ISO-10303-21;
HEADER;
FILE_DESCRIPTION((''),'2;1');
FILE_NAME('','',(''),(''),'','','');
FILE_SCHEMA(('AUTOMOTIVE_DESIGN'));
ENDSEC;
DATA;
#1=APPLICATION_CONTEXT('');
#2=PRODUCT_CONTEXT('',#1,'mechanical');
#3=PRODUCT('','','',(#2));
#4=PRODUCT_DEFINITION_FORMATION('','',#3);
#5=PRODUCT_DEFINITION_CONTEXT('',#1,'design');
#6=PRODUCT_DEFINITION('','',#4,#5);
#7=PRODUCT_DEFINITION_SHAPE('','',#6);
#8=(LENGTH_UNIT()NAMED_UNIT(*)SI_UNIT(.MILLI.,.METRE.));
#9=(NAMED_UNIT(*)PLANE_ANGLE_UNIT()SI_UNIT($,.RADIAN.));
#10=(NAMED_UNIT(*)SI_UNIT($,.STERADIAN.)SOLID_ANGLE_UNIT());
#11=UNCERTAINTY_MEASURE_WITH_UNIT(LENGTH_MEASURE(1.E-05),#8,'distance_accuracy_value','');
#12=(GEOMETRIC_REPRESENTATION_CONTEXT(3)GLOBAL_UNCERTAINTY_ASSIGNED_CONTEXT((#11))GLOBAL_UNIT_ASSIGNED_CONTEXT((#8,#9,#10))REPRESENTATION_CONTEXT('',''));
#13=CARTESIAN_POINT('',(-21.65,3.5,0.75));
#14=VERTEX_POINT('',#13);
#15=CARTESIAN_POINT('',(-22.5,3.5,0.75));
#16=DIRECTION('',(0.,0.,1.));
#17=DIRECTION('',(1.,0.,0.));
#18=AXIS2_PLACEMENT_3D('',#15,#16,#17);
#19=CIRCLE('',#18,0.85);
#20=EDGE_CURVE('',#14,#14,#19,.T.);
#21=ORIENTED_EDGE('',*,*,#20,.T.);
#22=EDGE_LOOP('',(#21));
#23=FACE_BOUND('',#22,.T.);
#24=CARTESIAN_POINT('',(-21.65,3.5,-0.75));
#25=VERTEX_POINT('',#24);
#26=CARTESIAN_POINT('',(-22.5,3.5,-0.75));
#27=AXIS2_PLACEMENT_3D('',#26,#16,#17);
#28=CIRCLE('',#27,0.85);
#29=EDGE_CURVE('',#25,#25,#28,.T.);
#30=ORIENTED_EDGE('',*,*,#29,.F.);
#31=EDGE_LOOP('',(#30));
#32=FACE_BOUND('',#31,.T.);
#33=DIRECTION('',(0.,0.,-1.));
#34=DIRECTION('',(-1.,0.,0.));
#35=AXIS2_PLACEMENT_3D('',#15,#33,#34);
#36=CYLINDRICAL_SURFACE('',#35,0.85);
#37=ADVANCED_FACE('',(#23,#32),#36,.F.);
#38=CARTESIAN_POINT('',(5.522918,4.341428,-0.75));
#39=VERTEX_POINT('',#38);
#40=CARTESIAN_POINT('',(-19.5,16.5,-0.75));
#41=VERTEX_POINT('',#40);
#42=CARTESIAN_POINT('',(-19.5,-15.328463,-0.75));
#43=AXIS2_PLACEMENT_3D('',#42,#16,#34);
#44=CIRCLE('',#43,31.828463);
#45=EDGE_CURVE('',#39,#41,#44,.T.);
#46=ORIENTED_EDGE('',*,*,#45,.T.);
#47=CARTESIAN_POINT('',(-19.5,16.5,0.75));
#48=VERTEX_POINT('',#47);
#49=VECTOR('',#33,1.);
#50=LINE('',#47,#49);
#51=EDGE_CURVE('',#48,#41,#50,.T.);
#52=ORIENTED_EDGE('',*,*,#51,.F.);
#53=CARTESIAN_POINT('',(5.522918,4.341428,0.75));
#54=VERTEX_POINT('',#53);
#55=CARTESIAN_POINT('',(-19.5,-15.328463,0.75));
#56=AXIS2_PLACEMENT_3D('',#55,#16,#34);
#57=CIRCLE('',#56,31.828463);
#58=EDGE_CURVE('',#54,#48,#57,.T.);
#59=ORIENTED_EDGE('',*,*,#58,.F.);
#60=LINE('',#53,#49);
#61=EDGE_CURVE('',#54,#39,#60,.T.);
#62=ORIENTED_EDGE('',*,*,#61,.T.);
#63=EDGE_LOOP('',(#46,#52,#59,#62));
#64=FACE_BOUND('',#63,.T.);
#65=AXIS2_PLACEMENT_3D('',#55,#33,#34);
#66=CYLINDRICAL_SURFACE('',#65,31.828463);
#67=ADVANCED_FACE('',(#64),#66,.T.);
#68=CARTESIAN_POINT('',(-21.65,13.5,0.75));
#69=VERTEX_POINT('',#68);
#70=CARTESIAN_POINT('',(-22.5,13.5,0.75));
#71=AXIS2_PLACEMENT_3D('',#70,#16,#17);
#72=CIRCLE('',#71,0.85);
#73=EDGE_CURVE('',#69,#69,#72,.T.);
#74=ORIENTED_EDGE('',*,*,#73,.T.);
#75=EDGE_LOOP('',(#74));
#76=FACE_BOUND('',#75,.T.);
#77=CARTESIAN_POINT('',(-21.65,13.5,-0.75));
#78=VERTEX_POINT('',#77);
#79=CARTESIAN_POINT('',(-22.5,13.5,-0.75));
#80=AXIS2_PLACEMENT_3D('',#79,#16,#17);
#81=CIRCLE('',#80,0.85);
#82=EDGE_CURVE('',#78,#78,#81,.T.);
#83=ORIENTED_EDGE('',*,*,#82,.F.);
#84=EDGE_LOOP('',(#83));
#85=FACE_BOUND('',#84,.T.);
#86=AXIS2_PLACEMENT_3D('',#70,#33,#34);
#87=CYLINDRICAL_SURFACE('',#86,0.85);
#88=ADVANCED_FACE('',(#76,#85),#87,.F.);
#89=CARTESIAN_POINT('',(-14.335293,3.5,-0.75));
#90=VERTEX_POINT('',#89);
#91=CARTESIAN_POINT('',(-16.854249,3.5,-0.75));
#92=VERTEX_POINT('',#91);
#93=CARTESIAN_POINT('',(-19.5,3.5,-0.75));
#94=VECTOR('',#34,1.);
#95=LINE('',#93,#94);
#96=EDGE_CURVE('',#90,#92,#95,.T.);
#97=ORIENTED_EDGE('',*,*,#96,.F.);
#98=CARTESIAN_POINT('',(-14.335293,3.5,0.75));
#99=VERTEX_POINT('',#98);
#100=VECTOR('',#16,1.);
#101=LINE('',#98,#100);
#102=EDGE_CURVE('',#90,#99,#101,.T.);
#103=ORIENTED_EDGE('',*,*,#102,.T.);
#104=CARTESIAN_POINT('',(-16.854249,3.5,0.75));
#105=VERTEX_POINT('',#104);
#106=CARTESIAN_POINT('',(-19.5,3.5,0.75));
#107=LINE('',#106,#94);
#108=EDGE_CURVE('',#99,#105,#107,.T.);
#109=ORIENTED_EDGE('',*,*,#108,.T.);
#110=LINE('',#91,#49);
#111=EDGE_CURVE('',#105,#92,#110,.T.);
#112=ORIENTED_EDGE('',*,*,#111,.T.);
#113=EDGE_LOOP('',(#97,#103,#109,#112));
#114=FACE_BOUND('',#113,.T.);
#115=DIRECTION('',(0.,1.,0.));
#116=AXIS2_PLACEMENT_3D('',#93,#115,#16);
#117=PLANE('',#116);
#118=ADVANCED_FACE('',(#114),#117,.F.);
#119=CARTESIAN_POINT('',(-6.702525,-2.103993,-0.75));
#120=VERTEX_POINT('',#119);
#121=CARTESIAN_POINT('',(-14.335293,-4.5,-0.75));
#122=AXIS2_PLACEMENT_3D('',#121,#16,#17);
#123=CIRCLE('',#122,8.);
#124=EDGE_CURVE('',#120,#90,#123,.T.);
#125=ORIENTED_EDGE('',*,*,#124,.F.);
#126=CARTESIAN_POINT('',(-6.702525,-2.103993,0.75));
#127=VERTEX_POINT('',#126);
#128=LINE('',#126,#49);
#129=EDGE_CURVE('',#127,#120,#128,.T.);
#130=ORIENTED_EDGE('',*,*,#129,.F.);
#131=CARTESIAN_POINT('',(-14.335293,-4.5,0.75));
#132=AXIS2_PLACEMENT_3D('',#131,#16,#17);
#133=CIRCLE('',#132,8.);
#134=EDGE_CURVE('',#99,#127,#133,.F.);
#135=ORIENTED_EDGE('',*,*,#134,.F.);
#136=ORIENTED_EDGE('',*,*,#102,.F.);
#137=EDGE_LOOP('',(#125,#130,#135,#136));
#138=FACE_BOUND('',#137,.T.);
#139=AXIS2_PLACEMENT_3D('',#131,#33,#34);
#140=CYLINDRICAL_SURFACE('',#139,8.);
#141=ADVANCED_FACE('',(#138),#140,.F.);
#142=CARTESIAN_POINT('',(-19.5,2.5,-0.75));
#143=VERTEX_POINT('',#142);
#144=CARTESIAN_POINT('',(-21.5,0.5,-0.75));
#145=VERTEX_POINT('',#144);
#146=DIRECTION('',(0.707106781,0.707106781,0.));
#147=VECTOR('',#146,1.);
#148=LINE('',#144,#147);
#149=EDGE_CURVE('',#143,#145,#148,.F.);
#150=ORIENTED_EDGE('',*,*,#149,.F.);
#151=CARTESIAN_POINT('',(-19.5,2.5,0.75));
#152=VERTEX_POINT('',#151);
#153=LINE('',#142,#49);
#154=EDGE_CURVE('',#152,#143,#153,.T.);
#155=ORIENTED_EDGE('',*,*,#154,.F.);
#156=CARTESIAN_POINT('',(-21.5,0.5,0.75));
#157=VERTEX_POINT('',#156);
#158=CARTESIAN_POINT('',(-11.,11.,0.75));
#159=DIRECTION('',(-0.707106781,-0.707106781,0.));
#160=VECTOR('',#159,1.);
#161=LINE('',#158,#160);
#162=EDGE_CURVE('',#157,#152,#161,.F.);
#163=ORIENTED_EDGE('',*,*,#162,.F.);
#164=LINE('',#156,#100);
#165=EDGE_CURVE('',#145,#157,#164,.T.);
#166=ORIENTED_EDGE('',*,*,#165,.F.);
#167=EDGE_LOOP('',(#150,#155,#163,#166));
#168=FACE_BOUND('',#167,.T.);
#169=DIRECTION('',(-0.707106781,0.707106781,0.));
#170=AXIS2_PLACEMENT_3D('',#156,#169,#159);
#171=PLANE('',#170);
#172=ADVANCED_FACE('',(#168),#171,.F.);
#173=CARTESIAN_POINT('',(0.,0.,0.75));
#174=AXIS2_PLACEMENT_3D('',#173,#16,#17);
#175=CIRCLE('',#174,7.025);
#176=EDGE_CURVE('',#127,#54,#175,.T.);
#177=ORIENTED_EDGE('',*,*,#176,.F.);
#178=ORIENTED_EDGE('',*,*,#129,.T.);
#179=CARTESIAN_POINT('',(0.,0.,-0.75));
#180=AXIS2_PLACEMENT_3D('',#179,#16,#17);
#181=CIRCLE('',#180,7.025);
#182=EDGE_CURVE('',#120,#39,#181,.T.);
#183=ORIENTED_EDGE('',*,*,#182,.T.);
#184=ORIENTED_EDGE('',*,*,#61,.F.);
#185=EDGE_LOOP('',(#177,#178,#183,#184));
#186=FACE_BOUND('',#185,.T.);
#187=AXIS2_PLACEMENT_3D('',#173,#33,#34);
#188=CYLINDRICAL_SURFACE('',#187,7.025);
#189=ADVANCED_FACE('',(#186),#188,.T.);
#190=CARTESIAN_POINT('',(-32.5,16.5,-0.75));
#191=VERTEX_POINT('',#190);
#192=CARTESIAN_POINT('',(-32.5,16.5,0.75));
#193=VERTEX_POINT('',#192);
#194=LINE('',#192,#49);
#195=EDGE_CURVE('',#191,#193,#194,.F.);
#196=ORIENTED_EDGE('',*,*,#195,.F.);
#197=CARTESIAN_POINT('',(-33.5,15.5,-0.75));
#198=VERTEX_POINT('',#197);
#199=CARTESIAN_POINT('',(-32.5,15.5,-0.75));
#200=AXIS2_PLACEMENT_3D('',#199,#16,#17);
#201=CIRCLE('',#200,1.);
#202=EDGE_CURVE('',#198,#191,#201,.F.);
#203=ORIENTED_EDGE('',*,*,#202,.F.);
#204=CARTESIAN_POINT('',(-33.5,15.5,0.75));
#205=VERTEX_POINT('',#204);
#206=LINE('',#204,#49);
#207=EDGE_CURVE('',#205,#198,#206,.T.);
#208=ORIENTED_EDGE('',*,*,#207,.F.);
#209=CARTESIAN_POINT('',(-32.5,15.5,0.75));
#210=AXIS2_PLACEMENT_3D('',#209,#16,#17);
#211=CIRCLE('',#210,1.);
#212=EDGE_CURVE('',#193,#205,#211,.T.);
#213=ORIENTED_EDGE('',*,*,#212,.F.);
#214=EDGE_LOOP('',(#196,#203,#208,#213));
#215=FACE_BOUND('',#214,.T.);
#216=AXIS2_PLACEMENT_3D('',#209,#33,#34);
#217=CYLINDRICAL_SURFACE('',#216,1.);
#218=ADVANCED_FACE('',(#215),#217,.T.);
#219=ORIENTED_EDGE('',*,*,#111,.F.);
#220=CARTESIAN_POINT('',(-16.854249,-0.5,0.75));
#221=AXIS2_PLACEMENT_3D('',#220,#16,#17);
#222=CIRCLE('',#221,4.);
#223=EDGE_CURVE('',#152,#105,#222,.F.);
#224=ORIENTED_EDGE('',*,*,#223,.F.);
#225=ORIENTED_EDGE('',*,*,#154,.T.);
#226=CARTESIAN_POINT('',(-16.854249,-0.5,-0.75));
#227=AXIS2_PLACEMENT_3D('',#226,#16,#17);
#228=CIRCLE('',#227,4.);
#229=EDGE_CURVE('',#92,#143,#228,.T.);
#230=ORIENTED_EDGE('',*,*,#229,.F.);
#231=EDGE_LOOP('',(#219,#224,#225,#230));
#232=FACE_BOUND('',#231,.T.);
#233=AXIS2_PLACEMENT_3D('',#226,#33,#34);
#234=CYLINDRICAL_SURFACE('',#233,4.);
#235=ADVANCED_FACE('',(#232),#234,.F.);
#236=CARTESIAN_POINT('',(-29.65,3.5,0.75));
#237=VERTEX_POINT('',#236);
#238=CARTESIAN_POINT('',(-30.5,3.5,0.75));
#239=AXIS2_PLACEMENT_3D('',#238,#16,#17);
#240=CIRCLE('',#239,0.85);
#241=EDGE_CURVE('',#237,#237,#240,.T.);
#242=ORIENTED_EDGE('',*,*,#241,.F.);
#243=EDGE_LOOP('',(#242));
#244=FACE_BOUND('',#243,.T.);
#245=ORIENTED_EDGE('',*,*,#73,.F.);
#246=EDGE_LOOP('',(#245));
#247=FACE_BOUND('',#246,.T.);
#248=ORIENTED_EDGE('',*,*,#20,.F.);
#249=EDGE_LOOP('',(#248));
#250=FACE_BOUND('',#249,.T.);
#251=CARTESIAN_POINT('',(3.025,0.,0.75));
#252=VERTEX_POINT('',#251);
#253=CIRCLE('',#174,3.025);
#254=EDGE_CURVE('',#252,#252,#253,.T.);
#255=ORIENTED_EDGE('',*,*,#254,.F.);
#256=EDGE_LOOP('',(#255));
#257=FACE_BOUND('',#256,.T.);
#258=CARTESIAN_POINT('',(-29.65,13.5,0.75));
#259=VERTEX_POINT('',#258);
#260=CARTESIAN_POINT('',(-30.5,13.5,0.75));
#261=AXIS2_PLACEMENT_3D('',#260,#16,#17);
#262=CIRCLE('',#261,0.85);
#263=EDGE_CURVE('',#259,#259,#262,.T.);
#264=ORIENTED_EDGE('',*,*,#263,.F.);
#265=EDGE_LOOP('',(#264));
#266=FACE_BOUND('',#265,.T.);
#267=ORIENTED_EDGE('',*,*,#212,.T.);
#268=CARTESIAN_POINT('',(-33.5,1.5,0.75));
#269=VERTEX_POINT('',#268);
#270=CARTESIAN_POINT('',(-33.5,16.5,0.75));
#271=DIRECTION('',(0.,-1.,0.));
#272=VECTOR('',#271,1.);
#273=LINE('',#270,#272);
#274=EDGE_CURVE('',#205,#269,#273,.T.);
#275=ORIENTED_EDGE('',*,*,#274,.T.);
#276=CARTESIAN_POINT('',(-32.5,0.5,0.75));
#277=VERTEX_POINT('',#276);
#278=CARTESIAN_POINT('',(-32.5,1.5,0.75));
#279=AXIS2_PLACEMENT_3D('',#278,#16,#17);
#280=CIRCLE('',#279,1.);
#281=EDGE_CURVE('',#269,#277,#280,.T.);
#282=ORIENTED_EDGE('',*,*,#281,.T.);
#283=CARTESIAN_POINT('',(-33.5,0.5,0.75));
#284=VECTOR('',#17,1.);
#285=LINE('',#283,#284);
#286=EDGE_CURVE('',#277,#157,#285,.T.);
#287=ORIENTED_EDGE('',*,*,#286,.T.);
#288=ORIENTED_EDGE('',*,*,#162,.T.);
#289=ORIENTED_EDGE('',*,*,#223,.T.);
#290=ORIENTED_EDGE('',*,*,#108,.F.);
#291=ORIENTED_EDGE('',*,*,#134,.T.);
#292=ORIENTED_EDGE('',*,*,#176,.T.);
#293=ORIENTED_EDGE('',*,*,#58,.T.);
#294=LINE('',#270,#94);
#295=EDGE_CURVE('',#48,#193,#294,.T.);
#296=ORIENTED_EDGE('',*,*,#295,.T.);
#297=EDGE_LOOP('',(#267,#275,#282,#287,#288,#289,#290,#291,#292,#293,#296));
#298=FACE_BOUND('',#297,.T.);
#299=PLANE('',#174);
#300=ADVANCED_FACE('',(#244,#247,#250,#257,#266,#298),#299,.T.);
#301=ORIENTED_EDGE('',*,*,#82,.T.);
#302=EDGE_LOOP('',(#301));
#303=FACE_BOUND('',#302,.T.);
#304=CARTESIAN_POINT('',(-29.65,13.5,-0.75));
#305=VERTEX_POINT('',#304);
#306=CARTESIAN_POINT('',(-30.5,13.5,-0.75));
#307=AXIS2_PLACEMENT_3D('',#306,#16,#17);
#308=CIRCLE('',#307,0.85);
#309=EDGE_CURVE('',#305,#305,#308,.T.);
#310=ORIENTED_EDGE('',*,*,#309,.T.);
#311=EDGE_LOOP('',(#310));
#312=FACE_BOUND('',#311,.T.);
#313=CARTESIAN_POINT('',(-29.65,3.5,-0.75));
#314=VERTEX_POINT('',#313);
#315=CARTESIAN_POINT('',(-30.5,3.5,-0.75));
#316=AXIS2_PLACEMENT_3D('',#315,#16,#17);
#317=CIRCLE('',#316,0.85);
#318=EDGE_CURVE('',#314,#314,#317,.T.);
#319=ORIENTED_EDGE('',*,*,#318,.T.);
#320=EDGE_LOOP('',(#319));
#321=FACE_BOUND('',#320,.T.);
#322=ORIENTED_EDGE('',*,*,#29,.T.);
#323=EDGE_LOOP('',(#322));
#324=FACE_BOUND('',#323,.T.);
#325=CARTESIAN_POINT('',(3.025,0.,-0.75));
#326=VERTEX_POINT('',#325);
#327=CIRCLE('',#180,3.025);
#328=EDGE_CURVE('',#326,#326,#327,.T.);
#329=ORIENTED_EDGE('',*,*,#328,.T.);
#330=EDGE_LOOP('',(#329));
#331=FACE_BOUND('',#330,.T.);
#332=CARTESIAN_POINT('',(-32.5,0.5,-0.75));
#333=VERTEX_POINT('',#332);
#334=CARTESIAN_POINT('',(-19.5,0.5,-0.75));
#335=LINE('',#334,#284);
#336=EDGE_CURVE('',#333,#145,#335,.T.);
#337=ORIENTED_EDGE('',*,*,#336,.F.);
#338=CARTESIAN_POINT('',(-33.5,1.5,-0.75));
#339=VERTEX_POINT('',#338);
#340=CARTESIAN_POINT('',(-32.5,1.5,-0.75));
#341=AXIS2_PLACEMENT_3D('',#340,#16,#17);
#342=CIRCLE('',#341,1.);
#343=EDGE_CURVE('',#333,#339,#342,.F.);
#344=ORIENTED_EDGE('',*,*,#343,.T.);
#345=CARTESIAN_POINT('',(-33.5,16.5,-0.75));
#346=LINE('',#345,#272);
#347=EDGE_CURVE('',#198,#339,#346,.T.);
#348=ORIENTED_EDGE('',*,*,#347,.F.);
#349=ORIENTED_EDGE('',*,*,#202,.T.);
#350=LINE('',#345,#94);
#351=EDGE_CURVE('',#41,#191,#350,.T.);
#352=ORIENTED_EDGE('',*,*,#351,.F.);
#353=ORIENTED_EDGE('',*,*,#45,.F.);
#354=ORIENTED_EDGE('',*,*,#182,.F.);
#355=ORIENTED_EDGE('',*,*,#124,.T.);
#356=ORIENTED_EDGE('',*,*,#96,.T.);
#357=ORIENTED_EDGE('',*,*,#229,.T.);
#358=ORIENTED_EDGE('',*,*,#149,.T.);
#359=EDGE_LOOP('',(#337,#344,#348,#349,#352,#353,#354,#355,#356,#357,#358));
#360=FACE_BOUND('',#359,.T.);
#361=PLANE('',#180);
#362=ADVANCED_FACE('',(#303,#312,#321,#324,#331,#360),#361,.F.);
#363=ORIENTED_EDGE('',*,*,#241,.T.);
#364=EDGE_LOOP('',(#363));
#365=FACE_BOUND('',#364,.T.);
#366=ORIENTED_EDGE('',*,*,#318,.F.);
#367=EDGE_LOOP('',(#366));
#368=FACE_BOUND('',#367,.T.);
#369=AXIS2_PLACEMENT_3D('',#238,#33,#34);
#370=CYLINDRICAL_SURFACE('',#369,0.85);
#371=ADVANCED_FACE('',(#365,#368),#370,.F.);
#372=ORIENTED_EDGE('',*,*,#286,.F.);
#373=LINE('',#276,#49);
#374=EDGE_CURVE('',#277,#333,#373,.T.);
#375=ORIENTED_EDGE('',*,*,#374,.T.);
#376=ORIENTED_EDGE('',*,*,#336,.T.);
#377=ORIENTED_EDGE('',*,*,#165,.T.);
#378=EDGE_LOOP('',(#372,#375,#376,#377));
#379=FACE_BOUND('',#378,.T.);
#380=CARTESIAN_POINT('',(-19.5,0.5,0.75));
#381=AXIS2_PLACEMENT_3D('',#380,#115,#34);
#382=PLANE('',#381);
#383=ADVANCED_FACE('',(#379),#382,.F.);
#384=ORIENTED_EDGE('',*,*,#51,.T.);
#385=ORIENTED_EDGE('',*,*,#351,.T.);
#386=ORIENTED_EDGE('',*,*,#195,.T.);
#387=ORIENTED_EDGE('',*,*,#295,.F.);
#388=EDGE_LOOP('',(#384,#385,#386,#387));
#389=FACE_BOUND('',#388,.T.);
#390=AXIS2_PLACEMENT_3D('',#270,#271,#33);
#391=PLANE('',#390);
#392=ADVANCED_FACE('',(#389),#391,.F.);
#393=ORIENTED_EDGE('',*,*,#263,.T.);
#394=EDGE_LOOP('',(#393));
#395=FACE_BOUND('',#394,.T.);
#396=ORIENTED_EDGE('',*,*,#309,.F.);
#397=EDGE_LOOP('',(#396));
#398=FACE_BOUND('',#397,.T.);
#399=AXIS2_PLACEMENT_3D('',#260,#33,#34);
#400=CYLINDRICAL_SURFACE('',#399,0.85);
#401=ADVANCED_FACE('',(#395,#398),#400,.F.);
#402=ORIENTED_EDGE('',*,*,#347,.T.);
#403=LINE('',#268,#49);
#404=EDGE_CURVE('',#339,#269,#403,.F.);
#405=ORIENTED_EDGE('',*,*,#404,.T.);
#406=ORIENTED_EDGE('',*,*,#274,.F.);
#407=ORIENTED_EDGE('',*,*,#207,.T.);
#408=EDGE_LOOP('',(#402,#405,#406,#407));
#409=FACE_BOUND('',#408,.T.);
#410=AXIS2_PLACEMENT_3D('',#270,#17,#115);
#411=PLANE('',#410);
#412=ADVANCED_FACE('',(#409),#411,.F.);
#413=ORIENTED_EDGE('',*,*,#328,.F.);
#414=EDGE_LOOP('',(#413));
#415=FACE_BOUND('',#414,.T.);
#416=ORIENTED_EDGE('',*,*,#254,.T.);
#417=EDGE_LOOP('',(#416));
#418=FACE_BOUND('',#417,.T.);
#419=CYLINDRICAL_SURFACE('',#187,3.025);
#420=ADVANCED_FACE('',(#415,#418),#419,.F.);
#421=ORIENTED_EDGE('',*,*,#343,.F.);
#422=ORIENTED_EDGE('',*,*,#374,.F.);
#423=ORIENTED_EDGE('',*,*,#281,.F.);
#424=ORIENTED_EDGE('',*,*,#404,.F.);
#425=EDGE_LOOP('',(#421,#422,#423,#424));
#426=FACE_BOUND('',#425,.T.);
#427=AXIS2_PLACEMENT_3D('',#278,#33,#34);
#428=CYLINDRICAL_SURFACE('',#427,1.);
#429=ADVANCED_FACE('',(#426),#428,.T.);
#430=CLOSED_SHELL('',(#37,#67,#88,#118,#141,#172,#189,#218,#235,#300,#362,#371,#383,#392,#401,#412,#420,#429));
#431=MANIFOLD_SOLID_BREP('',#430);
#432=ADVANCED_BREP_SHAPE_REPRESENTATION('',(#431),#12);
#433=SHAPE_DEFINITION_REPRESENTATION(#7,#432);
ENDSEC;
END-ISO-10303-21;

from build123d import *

# Parameters (mm, degrees)
ESQUISSE1_R             = 3.025
ESQUISSE1_R_2           = 0.85
BOSS_EXTRU_1_DEPTH      = 0.75
CONG_2_R                = 1
ESQUISSE2_W             = 12.492816186
ESQUISSE2_H             = 3
ENL_V_MAT_EXTRU_1_DEPTH = 38.373118682
CHANFREIN1_SIZE         = 2
CONG_3_R                = 4
CONG_4_R                = 8


with BuildPart() as part:
    # Esquisse1 → Boss.-Extru.1 (new, symmetric)
    with BuildSketch(Plane.XY):
        with BuildLine():
            Line((-33.5, 16.5), (-19.5, 16.5))
            ThreePointArc((-19.5, 16.5), (-5.589776158, 13.29943825), (5.522918298, 4.34142816))
            ThreePointArc((5.522918298, 4.34142816), (2.059102622, -6.716451548), (-7.007183814, 0.5))
            Line((-7.007183814, 0.5), (-19.5, 0.5))
            Line((-19.5, 0.5), (-33.5, 0.5))
            Line((-33.5, 0.5), (-33.5, 16.5))
        make_face()
        Circle(ESQUISSE1_R, mode=Mode.SUBTRACT)
        with Locations((-30.5, 13.5)):
            Circle(ESQUISSE1_R_2, mode=Mode.SUBTRACT)
        with Locations((-22.5, 13.5)):
            Circle(ESQUISSE1_R_2, mode=Mode.SUBTRACT)
        with Locations((-22.5, 3.5)):
            Circle(ESQUISSE1_R_2, mode=Mode.SUBTRACT)
        with Locations((-30.5, 3.5)):
            Circle(ESQUISSE1_R_2, mode=Mode.SUBTRACT)
    extrude(amount=BOSS_EXTRU_1_DEPTH, both=True)

    # Congé2
    cong_2_edges = [part.edges().sort_by_distance(p)[0] for p in [
        (-33.5, 16.5, 0),
        (-33.5, 0.5, 0),
    ]]
    fillet(cong_2_edges, radius=CONG_2_R)

    # Esquisse2 → Enlèv. mat.-Extru.1 (cut, through all)
    with BuildSketch(Plane.XY.offset(0.75)):
        with Locations((-13.253591907, 2)):
            Rectangle(ESQUISSE2_W, ESQUISSE2_H)
    extrude(amount=-ENL_V_MAT_EXTRU_1_DEPTH, mode=Mode.SUBTRACT)

    # Chanfrein1
    chanfrein1_edges = [part.edges().sort_by_distance(p)[0] for p in [
        (-19.5, 0.5, 0),
    ]]
    chamfer(chanfrein1_edges, length=CHANFREIN1_SIZE)

    # Congé3
    # the kernel refuses this fillet: 4 mm, written as the material it adds along each edge
    with BuildSketch(Plane(origin=(-19.5, 3.5, 0.75), x_dir=(0, -1, 0), z_dir=(0, 0, -1))) as cong_3_piece_1:
        with BuildLine():
            CenterArc((4, -2.645751311), CONG_3_R, 138.590377891, 41.409622109)
            Line((0, -2.645751311), (-0.08, -2.645751311))
            Line((-0.08, -2.645751311), (-0.08, 0))
            Line((-0.08, 0), (0, 0.08))
            ThreePointArc((0, 0.08), (0.5, 0.08), (0.94, 0.052915026))
            Line((0.94, 0.052915026), (1, 0))
        make_face()
    extrude(amount=1.5)

    # Congé4
    cong_4_edges = [part.edges().sort_by_distance(p)[0] for p in [
        (-7.007183814, 3.5, 0),
    ]]
    fillet(cong_4_edges, radius=CONG_4_R)


solid = part.part
